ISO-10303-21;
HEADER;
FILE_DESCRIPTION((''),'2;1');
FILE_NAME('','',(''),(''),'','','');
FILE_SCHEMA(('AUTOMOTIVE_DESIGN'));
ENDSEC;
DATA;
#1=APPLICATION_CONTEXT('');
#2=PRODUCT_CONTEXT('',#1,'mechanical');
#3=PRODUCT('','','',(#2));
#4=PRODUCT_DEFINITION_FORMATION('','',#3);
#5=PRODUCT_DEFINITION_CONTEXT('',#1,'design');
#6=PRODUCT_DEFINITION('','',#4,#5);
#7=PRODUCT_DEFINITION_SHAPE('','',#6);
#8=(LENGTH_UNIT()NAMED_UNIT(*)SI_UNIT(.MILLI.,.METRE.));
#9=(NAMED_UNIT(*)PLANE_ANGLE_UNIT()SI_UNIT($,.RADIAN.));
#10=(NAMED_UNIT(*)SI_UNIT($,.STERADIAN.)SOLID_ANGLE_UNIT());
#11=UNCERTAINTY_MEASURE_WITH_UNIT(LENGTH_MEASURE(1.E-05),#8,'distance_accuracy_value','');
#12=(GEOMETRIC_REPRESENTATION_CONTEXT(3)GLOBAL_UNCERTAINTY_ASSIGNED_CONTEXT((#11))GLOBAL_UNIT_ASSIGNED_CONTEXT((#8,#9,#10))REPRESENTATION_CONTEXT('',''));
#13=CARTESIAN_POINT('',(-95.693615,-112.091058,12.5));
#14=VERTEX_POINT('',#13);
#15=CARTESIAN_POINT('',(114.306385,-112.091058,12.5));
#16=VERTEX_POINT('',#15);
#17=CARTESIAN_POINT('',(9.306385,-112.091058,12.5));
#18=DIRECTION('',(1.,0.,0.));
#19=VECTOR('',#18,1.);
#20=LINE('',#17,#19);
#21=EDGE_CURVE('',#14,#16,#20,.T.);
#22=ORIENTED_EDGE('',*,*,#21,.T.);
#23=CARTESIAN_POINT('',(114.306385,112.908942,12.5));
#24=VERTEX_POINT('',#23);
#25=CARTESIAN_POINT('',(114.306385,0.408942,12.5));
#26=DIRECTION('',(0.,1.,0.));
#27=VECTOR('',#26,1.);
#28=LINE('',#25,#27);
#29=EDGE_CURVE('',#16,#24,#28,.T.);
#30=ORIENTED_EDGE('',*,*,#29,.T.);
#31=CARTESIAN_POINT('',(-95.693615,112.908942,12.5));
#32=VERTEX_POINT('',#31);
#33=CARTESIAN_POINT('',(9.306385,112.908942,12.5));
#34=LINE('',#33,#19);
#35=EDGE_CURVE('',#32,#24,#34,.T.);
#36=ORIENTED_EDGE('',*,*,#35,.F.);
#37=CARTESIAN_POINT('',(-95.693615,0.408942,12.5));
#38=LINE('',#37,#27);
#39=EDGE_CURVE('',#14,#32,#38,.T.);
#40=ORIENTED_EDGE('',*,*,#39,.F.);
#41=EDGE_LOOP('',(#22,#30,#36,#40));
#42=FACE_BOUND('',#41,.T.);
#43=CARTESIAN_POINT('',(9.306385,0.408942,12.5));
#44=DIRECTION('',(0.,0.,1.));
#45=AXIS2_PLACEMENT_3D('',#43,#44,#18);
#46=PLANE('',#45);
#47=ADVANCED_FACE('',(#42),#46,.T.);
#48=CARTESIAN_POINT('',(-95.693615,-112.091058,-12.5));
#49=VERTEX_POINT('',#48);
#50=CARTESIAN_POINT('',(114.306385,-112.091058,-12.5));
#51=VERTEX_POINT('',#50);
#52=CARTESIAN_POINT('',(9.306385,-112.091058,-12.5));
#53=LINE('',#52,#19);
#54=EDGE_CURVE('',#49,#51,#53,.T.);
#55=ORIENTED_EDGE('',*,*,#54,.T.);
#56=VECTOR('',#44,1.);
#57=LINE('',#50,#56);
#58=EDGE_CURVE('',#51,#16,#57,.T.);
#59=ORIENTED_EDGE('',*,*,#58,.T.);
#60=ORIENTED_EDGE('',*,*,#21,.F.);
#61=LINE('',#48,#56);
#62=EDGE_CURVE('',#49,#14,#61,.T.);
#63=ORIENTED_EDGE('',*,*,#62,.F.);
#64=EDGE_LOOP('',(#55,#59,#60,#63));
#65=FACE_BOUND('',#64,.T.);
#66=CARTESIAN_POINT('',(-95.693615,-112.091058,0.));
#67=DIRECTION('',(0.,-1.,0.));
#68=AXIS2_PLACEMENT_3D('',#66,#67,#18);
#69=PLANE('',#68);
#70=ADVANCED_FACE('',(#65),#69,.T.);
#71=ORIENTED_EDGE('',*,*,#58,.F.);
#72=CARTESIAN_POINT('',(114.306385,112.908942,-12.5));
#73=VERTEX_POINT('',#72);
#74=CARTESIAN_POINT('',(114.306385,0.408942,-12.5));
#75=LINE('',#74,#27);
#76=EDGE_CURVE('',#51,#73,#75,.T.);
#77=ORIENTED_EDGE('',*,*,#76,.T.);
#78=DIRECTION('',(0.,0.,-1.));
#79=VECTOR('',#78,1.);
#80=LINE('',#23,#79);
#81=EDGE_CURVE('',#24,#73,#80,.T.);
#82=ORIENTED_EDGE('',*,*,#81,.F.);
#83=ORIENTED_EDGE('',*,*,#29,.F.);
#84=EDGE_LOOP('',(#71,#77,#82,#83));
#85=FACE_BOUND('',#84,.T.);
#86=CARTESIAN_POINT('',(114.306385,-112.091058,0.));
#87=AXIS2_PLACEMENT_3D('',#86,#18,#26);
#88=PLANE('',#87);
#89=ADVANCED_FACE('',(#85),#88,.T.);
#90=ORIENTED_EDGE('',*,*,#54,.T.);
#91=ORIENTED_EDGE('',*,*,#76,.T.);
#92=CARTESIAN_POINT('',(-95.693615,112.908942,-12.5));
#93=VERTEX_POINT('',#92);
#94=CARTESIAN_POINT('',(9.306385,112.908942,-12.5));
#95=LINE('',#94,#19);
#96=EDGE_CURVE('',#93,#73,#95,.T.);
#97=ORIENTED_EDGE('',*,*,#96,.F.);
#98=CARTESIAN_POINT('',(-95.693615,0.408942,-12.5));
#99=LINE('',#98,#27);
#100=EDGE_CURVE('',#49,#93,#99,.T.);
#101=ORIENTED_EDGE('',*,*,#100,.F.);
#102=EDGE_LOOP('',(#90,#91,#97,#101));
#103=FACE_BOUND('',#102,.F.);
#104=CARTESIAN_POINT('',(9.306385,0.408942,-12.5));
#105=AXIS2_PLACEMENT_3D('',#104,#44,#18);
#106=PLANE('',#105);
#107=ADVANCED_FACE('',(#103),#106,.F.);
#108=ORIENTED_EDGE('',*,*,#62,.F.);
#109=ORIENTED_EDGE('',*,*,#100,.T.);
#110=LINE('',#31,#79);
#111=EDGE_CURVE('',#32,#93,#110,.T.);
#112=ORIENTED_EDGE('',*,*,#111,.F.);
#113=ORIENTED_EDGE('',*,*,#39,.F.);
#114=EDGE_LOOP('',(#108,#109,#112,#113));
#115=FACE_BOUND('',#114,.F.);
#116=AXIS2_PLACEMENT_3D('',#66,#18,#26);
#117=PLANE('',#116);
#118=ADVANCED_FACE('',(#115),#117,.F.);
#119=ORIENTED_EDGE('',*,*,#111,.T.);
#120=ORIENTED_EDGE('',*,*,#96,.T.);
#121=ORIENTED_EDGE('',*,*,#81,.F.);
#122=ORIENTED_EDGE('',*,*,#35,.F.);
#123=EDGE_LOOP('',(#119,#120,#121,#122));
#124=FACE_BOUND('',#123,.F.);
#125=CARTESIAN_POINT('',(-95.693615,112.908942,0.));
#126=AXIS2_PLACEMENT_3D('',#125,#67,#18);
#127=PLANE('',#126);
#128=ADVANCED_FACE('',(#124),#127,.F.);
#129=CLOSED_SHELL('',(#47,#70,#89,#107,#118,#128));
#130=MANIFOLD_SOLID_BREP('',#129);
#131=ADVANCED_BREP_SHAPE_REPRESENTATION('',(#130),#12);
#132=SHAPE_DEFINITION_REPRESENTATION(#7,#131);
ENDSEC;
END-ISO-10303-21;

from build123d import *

# Parameters (mm, degrees)
F0_W     = 210
F0_H     = 225
F1_DEPTH = 12.5


# Not quite as in the source:
# - a feature names something its author has since deleted; it is built from what else it names


with BuildPart() as f1:
    # F0 (on Top) → F1 (new body, symmetric)
    with BuildSketch(Plane.XY):
        with Locations((9.306384975, 0.4089418799)):
            Rectangle(F0_W, F0_H)
    extrude(amount=F1_DEPTH, both=True)


solid = f1.part
